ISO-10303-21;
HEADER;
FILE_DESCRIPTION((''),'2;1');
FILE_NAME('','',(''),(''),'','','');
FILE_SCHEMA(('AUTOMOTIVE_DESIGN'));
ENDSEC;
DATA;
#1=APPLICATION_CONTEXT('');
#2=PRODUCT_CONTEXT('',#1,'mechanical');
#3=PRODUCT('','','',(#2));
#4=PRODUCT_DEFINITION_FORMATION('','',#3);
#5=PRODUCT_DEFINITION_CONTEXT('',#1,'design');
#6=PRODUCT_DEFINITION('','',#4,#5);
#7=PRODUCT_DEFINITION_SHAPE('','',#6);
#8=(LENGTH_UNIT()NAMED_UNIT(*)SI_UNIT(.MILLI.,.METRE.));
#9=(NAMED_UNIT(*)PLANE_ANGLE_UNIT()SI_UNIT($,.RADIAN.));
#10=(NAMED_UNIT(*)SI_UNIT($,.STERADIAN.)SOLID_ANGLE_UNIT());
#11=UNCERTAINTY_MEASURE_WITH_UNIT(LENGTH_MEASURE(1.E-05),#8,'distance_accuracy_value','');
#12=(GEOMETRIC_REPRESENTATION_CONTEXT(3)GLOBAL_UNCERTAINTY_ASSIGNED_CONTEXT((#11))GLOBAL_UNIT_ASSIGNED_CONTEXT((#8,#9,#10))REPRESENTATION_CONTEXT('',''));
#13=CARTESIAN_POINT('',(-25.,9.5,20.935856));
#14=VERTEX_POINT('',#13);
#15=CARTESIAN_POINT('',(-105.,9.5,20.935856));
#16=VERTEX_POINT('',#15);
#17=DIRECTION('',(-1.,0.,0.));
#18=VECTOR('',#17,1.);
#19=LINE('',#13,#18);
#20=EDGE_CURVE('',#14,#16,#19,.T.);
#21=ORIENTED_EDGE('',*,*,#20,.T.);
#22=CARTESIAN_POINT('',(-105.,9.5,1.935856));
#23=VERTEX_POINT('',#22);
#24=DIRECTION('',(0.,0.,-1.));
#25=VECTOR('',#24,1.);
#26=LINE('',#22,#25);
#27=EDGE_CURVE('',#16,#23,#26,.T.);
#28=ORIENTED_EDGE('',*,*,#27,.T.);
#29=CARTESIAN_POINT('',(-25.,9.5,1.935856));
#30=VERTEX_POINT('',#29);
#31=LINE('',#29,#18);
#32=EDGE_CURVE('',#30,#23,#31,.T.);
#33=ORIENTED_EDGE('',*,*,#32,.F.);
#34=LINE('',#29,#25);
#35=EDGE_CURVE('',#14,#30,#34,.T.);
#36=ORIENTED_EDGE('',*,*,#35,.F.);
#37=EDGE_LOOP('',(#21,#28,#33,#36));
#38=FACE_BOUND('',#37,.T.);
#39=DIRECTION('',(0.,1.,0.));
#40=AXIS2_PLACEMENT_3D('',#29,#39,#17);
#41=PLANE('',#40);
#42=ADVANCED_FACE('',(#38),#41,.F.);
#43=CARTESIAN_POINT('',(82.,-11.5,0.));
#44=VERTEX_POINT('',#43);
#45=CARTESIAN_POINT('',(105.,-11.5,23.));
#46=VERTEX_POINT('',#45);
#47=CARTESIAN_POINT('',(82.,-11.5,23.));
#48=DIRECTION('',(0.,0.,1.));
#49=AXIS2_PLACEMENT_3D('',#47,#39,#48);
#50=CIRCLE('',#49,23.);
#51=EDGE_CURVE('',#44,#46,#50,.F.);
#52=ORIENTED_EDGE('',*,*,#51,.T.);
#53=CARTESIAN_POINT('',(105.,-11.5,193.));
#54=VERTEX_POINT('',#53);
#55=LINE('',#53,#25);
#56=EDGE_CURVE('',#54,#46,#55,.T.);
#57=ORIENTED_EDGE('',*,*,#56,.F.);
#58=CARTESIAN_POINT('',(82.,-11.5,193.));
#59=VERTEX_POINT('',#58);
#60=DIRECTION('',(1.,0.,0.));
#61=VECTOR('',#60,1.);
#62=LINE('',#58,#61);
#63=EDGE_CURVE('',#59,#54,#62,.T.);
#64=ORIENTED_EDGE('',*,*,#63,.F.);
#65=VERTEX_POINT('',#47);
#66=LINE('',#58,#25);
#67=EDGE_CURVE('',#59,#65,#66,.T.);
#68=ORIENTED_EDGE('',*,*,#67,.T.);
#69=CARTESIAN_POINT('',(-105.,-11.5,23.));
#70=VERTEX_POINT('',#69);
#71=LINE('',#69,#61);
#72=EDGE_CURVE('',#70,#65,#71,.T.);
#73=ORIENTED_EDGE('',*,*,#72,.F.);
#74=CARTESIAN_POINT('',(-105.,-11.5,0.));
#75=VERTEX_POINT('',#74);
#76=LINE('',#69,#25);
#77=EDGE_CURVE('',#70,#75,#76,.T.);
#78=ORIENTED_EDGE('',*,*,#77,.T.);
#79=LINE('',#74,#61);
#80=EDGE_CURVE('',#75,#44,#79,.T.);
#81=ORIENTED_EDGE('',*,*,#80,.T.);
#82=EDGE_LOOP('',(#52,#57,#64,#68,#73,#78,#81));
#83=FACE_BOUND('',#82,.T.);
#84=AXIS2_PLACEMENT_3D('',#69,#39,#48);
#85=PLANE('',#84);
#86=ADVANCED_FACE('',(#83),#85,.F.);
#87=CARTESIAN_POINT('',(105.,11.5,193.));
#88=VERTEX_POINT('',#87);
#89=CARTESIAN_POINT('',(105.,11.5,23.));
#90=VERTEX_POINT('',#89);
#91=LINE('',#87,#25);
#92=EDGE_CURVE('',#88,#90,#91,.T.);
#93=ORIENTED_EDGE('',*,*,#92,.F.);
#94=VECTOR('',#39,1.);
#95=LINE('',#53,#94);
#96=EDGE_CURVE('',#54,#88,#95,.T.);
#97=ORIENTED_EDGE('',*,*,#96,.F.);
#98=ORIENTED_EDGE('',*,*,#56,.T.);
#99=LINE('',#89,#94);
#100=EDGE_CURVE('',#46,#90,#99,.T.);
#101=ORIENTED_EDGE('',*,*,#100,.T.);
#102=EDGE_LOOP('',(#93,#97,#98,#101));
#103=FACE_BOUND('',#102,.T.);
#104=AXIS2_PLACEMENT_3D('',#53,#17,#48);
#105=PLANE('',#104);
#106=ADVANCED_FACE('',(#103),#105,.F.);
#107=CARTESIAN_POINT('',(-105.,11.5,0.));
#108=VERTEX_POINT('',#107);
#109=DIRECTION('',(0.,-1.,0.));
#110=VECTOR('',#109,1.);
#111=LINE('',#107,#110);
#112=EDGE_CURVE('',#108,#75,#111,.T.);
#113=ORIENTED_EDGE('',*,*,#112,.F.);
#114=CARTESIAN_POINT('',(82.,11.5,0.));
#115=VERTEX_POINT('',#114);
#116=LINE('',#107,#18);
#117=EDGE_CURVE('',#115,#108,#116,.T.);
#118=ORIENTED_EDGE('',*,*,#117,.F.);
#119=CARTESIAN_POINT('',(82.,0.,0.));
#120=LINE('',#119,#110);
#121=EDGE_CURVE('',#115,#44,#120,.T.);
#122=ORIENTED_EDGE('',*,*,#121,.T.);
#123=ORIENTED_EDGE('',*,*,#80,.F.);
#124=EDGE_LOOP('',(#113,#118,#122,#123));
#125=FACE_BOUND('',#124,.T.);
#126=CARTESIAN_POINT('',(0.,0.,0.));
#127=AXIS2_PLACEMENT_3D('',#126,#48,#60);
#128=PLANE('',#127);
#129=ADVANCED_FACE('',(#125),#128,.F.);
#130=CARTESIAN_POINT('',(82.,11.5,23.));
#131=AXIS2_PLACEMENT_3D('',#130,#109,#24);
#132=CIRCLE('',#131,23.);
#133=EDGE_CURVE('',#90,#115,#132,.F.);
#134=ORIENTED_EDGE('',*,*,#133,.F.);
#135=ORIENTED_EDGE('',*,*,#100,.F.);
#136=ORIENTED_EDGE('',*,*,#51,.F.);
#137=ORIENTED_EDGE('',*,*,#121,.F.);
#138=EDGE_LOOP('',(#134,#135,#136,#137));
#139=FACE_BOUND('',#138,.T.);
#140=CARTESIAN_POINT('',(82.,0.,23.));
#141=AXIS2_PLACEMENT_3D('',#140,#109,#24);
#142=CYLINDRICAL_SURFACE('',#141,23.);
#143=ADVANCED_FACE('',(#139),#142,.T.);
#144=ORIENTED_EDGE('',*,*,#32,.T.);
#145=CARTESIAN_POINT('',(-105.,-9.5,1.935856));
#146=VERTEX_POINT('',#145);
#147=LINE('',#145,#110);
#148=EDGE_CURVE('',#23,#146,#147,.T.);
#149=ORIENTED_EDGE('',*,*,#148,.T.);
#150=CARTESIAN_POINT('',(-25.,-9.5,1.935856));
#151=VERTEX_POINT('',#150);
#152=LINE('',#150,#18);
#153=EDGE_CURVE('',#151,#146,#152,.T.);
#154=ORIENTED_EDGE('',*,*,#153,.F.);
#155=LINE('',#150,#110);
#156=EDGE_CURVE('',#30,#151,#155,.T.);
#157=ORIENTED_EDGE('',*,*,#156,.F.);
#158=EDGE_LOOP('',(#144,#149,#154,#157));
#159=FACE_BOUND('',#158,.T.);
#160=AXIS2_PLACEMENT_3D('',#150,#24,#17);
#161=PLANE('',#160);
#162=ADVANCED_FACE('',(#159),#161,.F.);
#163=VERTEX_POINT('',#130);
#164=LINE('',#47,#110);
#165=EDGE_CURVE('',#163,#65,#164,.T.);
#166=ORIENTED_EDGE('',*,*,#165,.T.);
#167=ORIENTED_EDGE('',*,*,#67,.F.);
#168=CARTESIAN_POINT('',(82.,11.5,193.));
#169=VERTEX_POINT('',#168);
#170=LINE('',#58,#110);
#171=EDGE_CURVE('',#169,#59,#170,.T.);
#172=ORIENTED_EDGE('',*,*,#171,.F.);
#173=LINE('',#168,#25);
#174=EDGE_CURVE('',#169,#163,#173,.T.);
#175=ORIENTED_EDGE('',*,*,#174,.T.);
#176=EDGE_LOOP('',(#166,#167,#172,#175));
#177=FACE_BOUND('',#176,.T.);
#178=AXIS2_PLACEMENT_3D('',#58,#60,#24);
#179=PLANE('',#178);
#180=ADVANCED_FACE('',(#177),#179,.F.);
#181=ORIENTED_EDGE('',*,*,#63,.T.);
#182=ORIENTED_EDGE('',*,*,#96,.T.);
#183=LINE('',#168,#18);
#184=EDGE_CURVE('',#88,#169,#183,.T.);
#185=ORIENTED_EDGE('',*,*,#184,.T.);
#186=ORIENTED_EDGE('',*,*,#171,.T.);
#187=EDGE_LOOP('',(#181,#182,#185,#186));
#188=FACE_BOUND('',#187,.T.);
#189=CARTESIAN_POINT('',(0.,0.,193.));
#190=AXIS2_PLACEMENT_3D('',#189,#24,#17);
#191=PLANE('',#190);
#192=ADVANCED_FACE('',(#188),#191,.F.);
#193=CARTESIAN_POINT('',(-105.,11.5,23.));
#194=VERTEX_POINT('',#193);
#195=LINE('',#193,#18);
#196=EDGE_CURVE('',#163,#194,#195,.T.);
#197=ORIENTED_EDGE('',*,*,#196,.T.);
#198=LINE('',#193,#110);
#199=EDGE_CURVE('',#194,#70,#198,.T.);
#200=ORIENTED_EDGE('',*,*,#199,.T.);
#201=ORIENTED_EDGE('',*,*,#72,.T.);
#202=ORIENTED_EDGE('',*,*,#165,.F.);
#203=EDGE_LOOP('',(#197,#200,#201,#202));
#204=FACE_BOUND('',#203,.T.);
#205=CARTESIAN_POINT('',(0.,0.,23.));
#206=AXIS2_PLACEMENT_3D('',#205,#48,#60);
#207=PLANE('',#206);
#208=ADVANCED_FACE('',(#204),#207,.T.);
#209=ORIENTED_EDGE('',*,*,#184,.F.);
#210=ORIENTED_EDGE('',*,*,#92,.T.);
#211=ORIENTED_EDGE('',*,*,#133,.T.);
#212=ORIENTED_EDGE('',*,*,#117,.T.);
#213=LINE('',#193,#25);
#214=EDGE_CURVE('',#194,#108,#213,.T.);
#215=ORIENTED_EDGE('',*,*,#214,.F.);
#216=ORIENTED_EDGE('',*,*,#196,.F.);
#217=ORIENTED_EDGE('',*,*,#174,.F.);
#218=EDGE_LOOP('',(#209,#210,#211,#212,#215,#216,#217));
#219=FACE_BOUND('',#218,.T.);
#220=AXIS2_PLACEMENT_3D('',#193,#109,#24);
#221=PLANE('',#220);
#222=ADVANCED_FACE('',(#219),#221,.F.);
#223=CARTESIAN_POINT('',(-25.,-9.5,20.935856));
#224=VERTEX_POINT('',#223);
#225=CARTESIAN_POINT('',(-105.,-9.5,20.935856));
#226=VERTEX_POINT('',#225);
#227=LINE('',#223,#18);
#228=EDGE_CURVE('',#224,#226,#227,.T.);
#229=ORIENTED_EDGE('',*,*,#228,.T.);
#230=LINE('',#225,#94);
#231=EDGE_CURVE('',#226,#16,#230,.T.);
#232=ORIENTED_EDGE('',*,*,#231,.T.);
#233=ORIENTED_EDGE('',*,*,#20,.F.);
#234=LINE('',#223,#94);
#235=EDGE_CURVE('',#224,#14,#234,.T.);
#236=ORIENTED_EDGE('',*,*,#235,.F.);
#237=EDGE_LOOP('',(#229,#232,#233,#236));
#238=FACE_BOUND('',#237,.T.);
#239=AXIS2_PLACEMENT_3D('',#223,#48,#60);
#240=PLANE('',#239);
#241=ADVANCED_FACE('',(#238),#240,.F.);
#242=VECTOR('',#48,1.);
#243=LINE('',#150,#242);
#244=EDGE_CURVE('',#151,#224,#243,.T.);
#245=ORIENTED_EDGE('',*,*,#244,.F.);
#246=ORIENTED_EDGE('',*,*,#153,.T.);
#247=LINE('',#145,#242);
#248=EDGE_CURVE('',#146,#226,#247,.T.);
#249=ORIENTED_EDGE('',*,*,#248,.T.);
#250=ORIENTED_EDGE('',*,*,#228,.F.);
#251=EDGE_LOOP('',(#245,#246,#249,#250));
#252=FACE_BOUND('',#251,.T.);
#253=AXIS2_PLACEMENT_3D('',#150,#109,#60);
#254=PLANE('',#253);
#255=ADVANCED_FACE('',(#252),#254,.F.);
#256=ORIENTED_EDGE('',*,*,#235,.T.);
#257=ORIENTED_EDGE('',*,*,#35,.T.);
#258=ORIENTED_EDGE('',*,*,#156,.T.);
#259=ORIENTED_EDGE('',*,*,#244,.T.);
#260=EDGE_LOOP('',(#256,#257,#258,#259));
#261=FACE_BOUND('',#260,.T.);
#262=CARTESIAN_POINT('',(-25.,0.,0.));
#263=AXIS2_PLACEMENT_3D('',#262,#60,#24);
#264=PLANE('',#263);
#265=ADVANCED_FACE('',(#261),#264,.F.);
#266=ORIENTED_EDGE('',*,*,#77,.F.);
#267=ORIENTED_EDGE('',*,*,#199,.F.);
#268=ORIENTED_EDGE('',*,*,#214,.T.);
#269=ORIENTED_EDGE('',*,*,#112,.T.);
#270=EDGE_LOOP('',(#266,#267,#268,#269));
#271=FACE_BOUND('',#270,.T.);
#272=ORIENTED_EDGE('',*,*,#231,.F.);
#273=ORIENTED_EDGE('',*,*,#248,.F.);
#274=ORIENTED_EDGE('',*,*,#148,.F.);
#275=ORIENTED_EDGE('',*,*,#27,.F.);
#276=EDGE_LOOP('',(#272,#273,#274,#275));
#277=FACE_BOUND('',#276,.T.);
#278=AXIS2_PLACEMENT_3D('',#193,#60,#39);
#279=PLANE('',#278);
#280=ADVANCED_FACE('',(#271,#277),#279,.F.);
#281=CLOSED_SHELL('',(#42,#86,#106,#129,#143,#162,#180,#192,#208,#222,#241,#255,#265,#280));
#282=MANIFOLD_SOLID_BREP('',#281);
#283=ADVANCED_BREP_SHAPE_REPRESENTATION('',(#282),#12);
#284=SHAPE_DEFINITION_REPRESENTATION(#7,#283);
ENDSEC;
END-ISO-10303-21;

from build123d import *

# Parameters (mm, degrees)
CROQUIS1_W              = 210
CROQUIS1_H              = 23
SALIENTE_EXTRUIR2_DEPTH = 23
REDONDEO4_R             = 23
CROQUIS2_W              = 23
CROQUIS2_H              = 23
SALIENTE_EXTRUIR3_DEPTH = 170
CROQUIS8_W              = 19
CROQUIS8_H              = 19
CORTAR_EXTRUIR2_DEPTH   = 80


with BuildPart() as part:
    # Croquis1 → Saliente-Extruir2 (new body)
    with BuildSketch(Plane.XY):
        Rectangle(CROQUIS1_W, CROQUIS1_H)
    extrude(amount=SALIENTE_EXTRUIR2_DEPTH)

    # Redondeo4
    redondeo4_edges = [part.edges().sort_by_distance(p)[0] for p in [
        (105, 0, 0),
    ]]
    fillet(redondeo4_edges, radius=REDONDEO4_R - 0.0001)  # a hair under: the kernel refuses the full size

    # Croquis2 → Saliente-Extruir3 (add)
    with BuildSketch(Plane.XY.offset(23)):
        with Locations((93.5, 0)):
            Rectangle(CROQUIS2_W, CROQUIS2_H)
    extrude(amount=SALIENTE_EXTRUIR3_DEPTH)

    # Croquis8 → Cortar-Extruir2 (cut)
    with BuildSketch(Plane.ZY.offset(105)):
        with Locations((11.435856313, 0)):
            Rectangle(CROQUIS8_W, CROQUIS8_H)
    extrude(amount=-CORTAR_EXTRUIR2_DEPTH, mode=Mode.SUBTRACT)


solid = part.part
